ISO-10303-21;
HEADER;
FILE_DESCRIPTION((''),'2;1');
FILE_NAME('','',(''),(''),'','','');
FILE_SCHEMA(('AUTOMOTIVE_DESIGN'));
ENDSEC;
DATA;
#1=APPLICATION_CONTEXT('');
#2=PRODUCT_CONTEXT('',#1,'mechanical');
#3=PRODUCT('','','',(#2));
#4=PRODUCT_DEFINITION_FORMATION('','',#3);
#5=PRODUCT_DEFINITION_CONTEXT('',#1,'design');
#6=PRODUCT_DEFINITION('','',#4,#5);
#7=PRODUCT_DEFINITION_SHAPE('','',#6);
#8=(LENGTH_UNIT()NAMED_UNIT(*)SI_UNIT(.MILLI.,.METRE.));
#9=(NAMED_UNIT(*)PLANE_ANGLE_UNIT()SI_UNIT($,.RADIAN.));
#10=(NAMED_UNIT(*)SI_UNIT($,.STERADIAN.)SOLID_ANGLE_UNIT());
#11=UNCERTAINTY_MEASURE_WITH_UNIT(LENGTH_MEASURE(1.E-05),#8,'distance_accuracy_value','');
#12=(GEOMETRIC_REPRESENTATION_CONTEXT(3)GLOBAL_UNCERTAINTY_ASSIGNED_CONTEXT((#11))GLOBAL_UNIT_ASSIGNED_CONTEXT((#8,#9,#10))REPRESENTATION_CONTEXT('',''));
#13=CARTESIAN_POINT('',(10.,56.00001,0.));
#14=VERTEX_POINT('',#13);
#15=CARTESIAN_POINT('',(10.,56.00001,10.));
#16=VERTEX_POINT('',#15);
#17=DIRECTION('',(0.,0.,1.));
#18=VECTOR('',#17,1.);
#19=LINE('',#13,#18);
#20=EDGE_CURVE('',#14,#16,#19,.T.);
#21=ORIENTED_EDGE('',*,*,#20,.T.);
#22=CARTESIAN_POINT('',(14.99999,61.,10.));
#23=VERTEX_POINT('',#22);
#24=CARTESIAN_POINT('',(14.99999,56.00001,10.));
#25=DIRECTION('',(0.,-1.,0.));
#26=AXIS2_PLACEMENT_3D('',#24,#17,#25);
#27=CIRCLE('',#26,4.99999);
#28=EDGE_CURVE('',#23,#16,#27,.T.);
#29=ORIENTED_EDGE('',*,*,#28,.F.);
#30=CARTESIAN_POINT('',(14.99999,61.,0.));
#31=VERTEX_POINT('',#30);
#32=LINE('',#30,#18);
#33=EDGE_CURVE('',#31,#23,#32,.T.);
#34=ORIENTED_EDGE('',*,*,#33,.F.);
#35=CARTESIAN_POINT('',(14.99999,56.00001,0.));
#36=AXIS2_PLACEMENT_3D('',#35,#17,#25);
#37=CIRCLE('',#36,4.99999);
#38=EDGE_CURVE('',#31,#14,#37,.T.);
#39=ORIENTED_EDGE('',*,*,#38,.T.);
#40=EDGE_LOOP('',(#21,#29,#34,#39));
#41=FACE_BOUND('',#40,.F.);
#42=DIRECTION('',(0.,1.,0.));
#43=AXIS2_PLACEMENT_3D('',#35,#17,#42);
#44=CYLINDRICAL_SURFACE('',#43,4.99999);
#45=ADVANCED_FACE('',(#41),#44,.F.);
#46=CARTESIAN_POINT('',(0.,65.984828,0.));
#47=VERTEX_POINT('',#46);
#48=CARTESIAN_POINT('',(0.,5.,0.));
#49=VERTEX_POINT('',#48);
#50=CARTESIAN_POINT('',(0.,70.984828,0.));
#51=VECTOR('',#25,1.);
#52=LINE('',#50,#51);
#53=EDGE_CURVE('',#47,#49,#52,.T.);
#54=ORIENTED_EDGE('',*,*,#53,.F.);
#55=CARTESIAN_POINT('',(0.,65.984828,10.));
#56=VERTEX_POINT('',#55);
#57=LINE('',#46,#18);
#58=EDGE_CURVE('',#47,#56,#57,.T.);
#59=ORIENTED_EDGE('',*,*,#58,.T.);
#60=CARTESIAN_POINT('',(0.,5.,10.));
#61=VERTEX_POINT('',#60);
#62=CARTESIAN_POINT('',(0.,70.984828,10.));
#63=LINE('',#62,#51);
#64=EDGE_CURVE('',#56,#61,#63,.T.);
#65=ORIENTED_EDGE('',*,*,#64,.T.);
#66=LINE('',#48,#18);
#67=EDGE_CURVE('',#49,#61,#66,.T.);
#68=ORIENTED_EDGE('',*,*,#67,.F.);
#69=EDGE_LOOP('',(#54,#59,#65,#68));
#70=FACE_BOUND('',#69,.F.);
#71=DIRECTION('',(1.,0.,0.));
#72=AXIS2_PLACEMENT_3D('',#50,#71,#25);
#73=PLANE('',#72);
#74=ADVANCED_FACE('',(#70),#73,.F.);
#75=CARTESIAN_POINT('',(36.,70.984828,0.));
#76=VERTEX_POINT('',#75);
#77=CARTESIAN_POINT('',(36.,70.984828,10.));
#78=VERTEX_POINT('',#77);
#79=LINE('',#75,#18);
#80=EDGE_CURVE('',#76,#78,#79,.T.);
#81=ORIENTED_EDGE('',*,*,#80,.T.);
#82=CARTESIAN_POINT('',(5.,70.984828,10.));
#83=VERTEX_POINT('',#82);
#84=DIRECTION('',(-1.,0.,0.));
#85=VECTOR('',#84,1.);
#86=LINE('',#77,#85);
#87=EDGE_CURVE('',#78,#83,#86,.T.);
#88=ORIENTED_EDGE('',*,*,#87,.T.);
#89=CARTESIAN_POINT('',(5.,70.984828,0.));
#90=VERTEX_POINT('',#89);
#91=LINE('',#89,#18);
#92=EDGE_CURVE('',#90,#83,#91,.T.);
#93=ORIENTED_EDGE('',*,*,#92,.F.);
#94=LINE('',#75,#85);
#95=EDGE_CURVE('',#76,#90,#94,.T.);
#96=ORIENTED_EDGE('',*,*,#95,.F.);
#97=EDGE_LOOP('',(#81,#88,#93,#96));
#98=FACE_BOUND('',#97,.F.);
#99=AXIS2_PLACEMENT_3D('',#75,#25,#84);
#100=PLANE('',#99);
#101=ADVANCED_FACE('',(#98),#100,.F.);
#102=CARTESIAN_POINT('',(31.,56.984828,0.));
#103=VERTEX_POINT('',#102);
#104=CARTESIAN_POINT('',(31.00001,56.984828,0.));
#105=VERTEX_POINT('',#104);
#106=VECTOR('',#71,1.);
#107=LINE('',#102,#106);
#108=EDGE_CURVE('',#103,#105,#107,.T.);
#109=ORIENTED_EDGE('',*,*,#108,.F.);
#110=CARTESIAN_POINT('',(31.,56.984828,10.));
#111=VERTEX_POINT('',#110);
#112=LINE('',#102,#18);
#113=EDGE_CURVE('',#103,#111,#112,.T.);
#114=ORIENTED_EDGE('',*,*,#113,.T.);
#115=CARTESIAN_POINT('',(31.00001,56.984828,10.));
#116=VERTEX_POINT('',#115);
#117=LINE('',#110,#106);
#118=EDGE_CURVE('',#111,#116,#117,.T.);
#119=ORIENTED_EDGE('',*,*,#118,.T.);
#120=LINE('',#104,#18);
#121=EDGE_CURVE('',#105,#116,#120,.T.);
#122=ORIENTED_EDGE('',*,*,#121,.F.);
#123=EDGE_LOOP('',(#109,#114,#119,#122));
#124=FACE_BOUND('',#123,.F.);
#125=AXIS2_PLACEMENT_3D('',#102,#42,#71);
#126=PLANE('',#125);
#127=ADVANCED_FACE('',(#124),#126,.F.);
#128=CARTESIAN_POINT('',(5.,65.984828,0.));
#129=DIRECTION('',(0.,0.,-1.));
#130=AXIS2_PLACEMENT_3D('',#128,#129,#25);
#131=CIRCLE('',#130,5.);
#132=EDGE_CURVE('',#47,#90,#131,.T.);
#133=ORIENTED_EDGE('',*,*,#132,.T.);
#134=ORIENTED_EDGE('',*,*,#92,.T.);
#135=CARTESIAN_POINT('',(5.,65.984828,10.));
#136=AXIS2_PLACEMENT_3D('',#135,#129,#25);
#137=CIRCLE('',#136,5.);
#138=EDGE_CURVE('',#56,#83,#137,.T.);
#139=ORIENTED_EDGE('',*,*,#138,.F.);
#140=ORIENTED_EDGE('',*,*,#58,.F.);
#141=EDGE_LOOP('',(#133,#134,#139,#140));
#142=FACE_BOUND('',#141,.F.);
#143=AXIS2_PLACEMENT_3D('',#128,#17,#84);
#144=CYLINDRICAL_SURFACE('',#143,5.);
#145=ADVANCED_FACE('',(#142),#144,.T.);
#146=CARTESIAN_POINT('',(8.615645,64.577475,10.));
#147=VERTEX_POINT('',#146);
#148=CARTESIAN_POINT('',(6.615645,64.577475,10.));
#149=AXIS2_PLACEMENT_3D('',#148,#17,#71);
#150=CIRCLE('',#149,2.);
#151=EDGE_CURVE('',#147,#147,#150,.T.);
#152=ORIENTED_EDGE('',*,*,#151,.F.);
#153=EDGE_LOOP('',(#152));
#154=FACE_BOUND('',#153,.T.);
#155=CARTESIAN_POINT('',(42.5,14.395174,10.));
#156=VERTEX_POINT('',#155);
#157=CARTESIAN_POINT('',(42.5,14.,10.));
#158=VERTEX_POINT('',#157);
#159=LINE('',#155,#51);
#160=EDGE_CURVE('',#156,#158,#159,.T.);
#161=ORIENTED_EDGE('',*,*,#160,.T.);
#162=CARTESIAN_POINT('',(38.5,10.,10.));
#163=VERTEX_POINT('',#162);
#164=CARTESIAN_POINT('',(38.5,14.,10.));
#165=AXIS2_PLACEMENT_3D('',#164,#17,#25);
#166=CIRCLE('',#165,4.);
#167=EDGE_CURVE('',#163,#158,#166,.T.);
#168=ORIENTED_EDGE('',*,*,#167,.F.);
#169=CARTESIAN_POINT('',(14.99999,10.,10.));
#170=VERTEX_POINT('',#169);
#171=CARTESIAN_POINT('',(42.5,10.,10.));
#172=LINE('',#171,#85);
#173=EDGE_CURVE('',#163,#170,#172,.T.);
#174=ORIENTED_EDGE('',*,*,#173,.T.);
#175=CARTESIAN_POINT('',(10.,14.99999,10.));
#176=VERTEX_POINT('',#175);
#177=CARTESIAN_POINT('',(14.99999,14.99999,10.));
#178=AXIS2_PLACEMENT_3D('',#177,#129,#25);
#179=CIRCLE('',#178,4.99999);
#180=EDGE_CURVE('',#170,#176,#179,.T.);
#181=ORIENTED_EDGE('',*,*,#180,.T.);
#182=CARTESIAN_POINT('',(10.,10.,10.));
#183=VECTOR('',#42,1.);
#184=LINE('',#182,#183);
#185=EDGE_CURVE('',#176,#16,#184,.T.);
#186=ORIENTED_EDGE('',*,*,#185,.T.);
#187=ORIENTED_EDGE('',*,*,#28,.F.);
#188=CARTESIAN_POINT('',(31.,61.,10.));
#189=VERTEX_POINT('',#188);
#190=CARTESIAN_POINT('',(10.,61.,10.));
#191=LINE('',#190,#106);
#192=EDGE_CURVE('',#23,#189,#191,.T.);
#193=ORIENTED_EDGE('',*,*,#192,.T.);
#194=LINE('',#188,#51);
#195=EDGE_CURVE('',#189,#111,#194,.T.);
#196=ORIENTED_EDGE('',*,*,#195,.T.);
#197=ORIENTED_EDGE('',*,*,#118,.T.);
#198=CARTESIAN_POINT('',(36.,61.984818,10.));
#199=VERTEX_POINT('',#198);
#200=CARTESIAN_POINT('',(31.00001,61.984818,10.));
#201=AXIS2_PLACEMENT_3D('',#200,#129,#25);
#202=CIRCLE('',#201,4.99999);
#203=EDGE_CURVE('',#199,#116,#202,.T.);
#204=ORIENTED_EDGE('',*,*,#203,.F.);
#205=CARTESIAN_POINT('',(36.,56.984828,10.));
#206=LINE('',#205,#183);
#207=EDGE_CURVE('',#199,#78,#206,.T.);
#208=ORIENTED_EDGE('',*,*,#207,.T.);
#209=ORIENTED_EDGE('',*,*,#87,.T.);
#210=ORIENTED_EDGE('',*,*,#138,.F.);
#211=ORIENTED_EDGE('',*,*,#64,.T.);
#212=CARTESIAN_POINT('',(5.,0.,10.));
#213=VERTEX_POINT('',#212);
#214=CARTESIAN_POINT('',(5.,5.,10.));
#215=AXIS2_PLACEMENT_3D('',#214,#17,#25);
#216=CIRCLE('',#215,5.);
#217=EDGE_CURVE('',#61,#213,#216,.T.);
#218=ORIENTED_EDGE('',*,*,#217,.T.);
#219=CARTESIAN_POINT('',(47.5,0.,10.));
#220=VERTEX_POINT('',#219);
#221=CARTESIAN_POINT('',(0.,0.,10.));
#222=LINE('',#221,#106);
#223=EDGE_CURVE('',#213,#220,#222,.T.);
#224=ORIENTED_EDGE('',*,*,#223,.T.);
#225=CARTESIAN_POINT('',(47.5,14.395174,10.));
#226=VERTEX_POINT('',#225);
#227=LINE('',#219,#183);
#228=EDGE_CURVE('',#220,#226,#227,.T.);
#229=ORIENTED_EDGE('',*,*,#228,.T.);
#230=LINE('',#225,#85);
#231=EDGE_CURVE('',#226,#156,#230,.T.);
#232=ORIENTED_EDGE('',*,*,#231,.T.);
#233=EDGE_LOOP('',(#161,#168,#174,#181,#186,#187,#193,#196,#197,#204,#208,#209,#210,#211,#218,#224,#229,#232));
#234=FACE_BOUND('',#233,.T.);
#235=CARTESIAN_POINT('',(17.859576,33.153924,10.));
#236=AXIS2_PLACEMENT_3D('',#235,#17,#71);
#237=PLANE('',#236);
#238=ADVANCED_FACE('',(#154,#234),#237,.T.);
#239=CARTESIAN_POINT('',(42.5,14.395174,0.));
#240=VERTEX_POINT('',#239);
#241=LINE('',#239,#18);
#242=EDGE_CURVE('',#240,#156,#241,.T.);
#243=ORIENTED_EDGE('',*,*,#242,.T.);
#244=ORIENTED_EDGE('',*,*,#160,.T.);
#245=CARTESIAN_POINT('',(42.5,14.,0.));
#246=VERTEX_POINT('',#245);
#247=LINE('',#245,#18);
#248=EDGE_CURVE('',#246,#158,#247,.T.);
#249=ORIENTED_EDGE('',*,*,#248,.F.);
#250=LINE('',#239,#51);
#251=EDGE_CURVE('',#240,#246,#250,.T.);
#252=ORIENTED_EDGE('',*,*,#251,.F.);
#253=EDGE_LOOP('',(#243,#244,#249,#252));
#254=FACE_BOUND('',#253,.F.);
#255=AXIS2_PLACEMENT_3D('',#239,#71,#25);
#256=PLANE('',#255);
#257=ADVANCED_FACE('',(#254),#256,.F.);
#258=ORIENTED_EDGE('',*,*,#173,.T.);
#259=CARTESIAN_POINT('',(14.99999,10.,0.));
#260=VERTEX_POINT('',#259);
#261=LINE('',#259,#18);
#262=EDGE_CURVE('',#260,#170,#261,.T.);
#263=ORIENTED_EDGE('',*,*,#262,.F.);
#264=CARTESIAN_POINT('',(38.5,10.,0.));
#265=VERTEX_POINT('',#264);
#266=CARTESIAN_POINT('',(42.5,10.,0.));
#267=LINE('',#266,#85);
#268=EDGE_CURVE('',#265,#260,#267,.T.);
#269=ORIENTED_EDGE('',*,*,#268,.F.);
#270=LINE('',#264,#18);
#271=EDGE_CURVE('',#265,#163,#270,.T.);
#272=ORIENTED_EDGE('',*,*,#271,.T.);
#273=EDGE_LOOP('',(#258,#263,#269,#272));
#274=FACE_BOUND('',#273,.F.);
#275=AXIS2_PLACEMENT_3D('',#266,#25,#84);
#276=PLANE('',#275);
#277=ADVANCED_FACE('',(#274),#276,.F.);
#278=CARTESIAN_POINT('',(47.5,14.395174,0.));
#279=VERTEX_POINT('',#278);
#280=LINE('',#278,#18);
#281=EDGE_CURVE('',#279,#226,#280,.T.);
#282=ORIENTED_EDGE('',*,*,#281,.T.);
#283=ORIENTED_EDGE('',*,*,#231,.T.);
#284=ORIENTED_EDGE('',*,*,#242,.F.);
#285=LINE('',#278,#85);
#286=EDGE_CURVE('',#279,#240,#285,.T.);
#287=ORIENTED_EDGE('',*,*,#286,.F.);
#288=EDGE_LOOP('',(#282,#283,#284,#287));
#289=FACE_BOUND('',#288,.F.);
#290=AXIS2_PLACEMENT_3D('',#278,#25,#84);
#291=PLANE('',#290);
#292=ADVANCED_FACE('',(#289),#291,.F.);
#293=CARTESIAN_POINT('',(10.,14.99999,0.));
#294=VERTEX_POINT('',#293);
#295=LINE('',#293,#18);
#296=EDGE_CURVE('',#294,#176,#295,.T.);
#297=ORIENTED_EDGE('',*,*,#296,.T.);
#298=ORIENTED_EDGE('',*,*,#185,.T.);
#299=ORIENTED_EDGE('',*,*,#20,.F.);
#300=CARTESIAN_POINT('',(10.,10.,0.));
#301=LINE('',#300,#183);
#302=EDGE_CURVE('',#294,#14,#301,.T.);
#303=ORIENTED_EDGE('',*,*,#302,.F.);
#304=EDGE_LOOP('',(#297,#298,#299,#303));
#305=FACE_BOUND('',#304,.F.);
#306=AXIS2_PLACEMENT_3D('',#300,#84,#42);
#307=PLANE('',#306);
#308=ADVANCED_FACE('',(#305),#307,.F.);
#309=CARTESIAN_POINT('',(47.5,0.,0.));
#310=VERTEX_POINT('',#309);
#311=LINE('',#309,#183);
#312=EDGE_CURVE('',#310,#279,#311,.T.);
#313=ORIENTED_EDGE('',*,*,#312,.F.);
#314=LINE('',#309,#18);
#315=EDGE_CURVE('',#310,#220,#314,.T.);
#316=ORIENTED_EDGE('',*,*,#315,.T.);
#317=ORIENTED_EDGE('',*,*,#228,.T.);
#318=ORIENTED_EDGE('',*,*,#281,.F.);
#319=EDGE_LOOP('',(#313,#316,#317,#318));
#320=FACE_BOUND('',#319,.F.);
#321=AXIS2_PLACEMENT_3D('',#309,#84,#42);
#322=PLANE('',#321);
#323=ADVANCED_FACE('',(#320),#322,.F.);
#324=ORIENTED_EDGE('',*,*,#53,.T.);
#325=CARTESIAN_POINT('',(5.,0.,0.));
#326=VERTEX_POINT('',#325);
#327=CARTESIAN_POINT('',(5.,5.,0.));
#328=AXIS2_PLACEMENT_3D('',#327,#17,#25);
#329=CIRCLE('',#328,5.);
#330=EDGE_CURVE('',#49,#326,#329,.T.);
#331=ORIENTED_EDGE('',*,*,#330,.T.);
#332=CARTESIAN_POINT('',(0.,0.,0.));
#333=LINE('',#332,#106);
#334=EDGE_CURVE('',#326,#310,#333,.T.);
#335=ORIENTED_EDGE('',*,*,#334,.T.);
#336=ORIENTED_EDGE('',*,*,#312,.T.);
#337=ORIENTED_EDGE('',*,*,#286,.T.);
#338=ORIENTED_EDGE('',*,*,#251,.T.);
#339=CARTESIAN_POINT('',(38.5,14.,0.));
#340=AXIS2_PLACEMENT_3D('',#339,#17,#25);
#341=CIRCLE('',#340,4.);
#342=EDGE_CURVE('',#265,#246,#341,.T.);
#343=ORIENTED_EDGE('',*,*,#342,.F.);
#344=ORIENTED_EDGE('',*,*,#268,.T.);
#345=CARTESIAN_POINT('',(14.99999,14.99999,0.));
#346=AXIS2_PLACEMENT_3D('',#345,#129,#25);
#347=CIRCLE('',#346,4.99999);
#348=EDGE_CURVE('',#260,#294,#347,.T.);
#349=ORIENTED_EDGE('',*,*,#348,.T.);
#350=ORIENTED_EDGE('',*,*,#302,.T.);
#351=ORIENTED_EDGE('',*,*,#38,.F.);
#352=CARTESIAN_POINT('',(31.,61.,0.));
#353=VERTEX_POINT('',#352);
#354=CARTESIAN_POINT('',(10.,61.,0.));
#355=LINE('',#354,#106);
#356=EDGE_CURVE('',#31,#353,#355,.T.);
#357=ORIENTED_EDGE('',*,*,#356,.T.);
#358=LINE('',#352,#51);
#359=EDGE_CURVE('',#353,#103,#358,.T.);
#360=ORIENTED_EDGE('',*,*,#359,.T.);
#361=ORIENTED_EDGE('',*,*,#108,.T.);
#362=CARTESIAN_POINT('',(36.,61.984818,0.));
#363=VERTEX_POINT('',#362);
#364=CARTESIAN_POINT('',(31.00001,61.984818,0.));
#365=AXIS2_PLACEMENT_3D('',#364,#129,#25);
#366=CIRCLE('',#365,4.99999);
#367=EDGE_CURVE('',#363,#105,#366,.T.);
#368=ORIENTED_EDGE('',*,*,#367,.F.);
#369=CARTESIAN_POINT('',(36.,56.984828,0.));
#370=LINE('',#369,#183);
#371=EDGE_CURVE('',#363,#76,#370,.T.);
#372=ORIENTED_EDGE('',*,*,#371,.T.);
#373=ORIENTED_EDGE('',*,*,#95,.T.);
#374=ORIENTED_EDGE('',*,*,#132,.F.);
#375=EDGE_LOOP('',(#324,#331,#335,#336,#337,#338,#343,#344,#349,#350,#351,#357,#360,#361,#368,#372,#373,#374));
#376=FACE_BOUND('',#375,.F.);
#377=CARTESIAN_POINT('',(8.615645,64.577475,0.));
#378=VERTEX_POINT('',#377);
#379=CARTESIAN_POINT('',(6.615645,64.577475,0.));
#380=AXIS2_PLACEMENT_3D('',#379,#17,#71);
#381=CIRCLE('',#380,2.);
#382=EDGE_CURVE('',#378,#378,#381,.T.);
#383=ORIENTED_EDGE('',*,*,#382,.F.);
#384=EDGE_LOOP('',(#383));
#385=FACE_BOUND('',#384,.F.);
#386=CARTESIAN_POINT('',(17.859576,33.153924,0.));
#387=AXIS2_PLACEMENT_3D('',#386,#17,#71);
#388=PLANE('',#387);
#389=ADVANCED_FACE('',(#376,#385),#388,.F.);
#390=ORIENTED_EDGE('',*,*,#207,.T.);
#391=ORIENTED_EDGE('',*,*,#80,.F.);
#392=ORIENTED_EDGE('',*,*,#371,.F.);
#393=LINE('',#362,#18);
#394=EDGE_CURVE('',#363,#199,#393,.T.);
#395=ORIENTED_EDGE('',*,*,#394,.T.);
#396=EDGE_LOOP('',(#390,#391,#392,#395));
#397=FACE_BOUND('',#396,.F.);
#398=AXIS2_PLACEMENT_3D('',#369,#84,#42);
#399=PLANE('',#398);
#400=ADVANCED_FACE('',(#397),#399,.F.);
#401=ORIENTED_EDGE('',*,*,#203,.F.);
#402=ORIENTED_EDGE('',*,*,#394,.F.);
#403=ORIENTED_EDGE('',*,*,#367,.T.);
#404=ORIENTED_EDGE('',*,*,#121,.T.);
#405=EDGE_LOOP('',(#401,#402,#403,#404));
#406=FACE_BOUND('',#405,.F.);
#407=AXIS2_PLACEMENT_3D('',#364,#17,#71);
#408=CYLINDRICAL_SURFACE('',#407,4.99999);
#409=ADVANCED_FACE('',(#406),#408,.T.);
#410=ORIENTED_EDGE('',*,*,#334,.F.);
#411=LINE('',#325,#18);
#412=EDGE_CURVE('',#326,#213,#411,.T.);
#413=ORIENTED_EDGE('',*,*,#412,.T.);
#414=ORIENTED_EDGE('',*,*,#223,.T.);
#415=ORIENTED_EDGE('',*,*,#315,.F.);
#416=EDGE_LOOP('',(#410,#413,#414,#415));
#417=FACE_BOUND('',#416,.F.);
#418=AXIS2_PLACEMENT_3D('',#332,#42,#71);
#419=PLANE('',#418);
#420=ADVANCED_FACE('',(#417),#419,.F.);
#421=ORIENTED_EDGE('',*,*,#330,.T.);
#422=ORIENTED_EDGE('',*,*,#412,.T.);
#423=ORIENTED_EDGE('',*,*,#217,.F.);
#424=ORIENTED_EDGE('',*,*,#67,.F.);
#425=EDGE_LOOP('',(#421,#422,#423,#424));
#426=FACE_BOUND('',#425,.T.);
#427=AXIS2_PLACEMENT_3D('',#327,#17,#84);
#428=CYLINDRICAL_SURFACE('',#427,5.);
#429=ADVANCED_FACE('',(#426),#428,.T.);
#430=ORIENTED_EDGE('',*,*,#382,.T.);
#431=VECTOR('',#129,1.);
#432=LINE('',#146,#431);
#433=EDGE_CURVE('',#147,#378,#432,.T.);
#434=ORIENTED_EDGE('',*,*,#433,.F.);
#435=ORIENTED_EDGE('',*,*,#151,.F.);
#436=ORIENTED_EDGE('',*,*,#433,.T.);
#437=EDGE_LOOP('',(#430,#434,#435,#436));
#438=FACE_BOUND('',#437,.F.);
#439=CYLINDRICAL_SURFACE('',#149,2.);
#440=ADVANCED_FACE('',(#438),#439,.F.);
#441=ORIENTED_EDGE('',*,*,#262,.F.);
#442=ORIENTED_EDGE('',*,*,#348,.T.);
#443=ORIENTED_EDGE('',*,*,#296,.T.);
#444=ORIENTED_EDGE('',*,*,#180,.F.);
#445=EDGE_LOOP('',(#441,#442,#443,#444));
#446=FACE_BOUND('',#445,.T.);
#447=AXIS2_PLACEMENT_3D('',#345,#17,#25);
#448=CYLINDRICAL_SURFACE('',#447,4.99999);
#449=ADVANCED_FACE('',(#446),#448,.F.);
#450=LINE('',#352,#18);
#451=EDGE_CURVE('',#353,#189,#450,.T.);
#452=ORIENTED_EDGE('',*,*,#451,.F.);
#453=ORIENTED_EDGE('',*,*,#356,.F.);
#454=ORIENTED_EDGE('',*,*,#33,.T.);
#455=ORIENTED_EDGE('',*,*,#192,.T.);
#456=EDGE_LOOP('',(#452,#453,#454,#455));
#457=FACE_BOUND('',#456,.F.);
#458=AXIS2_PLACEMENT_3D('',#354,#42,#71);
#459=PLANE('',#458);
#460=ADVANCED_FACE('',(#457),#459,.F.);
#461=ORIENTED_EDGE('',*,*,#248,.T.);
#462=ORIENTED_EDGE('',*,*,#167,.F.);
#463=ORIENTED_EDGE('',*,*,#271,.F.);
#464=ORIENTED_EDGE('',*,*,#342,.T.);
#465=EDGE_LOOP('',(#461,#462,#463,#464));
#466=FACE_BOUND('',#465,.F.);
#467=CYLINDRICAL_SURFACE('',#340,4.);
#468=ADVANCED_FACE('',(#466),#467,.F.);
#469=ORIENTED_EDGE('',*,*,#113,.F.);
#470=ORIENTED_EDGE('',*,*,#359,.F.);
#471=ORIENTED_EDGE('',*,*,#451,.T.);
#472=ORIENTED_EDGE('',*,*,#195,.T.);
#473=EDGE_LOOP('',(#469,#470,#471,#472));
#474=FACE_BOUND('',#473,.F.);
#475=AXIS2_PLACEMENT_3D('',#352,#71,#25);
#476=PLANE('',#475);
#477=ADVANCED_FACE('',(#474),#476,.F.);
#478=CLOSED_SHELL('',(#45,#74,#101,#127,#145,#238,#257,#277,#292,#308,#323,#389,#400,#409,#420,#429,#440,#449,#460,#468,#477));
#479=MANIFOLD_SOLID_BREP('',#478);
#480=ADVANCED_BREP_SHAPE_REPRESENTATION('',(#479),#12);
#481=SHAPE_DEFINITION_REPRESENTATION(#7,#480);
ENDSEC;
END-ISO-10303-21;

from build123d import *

# Parameters (mm, degrees)
F1_DEPTH = 10
F2_R     = 5
F3_R     = 4.99999
F5_R     = 4
F6_R     = 2
F7_DEPTH = 10


# Not quite as in the source:
# - two fillets or chamfers of one size are made in one step
# - a fillet or chamfer is up to 0.001 mm smaller than in the source, because OpenCascade refuses the exact size


with BuildPart() as f1:
    # F0 (on Top) → F1 (new body)
    with BuildSketch(Plane.XY):
        Polygon((0, 70.9848281697), (0, 0), (36, 0), (47.5, 0), (47.5, 14.3951736391), (42.5, 14.3951736391), (42.5, 10), (36, 10), (10, 10), (10, 61), (26.8777515739, 61), (31, 61), (31, 56.9848281697), (36, 56.9848281697), (36, 70.9848281697), align=None)
    extrude(amount=F1_DEPTH)

    # F2
    f2_edges = [f1.edges().sort_by_distance(p)[0] for p in [
        (0, 0, 5),
        (0, 70.984828, 5),
    ]]
    fillet(f2_edges, radius=F2_R)

    # F3 (radius 5 in the source; OpenCascade refuses exactly that, so slightly less here)
    f3_edges = [f1.edges().sort_by_distance(p)[0] for p in [
        (10, 10, 5),
        (36, 56.984828, 5),
        (10, 61, 5),
    ]]
    fillet(f3_edges, radius=F3_R)

    # F5
    f5_edges = [f1.edges().sort_by_distance(p)[0] for p in [
        (42.5, 10, 5),
    ]]
    fillet(f5_edges, radius=F5_R)

    # F6 (on face) → F7 (cut, through all)
    with BuildSketch(Plane.XY.offset(10)):
        with Locations((6.6156452522, 64.5774751902)):
            Circle(F6_R)
    extrude(amount=-F7_DEPTH, mode=Mode.SUBTRACT)


solid = f1.part
